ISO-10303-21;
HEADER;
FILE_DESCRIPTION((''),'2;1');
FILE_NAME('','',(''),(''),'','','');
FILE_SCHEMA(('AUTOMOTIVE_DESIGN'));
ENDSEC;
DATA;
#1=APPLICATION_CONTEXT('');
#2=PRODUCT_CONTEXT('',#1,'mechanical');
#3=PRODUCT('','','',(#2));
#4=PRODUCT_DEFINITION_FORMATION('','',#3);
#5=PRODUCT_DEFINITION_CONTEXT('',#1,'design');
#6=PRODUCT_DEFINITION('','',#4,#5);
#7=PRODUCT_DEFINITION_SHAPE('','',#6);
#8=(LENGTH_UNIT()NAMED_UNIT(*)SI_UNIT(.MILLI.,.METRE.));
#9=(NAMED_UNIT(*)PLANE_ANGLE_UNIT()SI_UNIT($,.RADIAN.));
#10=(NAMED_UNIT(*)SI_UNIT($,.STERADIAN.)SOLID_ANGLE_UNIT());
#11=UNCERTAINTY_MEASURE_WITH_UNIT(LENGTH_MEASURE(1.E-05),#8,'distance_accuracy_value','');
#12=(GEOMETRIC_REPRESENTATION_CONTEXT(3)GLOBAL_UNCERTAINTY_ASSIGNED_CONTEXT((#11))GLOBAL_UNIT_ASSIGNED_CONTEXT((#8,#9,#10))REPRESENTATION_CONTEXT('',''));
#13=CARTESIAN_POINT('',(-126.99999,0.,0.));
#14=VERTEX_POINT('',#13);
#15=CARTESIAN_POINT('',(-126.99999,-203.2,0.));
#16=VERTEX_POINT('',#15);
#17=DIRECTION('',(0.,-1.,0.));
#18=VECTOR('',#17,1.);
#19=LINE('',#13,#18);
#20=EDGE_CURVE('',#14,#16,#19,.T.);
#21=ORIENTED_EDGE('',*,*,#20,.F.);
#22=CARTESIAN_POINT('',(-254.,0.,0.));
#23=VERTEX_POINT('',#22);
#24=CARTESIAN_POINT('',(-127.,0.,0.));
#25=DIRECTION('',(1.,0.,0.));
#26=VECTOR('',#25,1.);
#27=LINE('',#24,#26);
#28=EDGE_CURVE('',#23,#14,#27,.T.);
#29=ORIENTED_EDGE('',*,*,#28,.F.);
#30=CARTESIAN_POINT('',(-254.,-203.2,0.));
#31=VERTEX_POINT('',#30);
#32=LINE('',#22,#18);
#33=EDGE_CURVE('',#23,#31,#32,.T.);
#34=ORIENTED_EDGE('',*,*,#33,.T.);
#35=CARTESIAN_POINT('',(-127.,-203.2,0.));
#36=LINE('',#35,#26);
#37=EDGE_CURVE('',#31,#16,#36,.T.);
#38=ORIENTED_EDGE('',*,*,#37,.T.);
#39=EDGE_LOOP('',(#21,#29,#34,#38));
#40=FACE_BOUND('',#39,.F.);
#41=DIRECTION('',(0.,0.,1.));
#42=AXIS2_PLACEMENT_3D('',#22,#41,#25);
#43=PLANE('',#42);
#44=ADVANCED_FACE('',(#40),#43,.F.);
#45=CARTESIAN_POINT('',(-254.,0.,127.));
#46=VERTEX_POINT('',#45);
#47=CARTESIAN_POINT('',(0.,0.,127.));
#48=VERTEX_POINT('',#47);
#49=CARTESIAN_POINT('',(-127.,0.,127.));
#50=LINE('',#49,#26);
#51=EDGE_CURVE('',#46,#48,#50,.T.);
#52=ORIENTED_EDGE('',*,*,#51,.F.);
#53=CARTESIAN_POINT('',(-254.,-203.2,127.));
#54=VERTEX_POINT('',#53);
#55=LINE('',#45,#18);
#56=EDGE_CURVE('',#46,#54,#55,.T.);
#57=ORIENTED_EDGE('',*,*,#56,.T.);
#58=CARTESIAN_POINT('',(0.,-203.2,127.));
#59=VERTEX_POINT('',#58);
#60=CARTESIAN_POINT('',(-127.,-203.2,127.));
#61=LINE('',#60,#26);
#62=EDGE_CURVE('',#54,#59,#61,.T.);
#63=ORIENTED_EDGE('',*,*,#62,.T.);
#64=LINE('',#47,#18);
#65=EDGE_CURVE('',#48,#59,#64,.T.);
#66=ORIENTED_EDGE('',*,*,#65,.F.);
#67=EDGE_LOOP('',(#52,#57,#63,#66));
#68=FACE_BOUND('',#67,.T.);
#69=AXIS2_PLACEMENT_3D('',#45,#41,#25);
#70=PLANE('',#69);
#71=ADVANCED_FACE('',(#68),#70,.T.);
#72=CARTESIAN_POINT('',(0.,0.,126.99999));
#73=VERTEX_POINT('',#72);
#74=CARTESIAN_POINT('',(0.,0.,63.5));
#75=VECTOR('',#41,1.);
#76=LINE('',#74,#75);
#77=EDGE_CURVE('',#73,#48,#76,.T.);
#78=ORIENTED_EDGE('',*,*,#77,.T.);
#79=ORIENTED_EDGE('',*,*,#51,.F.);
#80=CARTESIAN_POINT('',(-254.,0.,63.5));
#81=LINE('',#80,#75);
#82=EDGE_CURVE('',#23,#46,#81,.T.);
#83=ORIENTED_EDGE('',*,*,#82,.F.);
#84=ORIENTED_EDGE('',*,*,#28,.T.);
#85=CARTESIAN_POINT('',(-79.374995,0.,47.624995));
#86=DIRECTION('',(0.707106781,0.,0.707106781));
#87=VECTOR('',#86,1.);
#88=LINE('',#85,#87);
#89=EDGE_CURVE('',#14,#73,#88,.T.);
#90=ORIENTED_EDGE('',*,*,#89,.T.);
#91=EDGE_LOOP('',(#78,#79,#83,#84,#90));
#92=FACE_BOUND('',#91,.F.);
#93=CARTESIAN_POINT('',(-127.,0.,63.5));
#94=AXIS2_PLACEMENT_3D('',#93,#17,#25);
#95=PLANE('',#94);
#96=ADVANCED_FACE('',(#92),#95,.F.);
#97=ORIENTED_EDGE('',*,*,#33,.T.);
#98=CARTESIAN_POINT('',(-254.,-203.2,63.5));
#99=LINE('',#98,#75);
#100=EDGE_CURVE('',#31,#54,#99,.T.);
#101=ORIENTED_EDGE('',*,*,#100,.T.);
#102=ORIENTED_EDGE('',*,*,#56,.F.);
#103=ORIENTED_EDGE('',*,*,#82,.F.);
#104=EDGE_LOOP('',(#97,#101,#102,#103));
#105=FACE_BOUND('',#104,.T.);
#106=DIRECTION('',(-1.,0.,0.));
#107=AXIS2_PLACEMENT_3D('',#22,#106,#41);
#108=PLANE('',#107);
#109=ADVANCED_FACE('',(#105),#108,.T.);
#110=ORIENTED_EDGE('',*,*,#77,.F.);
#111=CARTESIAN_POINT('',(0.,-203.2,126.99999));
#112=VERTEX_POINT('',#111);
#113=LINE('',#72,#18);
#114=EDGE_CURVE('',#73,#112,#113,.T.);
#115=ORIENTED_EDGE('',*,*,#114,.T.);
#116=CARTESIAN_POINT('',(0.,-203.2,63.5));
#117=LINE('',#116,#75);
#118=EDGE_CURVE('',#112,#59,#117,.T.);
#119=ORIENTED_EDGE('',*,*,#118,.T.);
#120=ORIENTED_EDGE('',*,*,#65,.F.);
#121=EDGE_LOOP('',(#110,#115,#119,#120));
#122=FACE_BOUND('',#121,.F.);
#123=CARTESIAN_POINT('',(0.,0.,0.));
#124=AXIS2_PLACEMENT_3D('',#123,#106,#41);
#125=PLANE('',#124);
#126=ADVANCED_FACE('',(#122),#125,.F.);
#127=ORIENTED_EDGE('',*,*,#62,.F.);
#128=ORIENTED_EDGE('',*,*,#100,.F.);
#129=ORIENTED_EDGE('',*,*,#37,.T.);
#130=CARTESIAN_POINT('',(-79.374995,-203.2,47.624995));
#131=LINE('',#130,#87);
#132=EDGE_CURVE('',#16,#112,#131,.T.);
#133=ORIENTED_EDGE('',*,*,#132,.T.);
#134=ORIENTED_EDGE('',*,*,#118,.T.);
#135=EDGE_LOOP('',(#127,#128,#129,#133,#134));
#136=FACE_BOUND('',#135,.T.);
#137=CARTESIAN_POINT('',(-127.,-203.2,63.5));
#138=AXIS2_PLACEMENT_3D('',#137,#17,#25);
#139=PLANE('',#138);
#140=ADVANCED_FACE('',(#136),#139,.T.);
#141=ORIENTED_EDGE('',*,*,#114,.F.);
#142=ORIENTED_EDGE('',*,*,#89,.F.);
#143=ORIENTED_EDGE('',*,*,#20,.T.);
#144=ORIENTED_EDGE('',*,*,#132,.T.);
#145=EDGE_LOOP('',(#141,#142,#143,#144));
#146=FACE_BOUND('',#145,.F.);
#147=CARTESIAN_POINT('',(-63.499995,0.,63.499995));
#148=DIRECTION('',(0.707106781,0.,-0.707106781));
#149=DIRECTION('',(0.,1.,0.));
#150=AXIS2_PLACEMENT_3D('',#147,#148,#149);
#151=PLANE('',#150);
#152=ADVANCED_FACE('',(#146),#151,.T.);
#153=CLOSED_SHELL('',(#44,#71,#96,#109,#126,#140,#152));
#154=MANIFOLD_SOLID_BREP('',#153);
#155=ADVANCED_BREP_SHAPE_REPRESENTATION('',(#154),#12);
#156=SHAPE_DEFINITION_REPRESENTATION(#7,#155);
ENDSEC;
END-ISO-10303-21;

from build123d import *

# Parameters (mm, degrees)
F0_W     = 254
F0_H     = 127
F1_DEPTH = 203.2
F2_SIZE2 = 126.99999
F2_SIZE  = 126.99999


# Not quite as in the source:
# - a fillet or chamfer is up to 0.001 mm smaller than in the source, because OpenCascade refuses the exact size


with BuildPart() as f1:
    # F0 (on Front) → F1 (new body)
    with BuildSketch(Plane.XZ):
        with Locations((-127, 63.5)):
            Rectangle(F0_W, F0_H)
    extrude(amount=F1_DEPTH)

    # F2 (size 127 and 127 in the source; OpenCascade refuses exactly that, so slightly less here)
    f2_edges = [f1.edges().sort_by_distance(p)[0] for p in [
        (0, -101.6, 0),
    ]]
    chamfer(f2_edges, length=F2_SIZE, length2=F2_SIZE2)


solid = f1.part
